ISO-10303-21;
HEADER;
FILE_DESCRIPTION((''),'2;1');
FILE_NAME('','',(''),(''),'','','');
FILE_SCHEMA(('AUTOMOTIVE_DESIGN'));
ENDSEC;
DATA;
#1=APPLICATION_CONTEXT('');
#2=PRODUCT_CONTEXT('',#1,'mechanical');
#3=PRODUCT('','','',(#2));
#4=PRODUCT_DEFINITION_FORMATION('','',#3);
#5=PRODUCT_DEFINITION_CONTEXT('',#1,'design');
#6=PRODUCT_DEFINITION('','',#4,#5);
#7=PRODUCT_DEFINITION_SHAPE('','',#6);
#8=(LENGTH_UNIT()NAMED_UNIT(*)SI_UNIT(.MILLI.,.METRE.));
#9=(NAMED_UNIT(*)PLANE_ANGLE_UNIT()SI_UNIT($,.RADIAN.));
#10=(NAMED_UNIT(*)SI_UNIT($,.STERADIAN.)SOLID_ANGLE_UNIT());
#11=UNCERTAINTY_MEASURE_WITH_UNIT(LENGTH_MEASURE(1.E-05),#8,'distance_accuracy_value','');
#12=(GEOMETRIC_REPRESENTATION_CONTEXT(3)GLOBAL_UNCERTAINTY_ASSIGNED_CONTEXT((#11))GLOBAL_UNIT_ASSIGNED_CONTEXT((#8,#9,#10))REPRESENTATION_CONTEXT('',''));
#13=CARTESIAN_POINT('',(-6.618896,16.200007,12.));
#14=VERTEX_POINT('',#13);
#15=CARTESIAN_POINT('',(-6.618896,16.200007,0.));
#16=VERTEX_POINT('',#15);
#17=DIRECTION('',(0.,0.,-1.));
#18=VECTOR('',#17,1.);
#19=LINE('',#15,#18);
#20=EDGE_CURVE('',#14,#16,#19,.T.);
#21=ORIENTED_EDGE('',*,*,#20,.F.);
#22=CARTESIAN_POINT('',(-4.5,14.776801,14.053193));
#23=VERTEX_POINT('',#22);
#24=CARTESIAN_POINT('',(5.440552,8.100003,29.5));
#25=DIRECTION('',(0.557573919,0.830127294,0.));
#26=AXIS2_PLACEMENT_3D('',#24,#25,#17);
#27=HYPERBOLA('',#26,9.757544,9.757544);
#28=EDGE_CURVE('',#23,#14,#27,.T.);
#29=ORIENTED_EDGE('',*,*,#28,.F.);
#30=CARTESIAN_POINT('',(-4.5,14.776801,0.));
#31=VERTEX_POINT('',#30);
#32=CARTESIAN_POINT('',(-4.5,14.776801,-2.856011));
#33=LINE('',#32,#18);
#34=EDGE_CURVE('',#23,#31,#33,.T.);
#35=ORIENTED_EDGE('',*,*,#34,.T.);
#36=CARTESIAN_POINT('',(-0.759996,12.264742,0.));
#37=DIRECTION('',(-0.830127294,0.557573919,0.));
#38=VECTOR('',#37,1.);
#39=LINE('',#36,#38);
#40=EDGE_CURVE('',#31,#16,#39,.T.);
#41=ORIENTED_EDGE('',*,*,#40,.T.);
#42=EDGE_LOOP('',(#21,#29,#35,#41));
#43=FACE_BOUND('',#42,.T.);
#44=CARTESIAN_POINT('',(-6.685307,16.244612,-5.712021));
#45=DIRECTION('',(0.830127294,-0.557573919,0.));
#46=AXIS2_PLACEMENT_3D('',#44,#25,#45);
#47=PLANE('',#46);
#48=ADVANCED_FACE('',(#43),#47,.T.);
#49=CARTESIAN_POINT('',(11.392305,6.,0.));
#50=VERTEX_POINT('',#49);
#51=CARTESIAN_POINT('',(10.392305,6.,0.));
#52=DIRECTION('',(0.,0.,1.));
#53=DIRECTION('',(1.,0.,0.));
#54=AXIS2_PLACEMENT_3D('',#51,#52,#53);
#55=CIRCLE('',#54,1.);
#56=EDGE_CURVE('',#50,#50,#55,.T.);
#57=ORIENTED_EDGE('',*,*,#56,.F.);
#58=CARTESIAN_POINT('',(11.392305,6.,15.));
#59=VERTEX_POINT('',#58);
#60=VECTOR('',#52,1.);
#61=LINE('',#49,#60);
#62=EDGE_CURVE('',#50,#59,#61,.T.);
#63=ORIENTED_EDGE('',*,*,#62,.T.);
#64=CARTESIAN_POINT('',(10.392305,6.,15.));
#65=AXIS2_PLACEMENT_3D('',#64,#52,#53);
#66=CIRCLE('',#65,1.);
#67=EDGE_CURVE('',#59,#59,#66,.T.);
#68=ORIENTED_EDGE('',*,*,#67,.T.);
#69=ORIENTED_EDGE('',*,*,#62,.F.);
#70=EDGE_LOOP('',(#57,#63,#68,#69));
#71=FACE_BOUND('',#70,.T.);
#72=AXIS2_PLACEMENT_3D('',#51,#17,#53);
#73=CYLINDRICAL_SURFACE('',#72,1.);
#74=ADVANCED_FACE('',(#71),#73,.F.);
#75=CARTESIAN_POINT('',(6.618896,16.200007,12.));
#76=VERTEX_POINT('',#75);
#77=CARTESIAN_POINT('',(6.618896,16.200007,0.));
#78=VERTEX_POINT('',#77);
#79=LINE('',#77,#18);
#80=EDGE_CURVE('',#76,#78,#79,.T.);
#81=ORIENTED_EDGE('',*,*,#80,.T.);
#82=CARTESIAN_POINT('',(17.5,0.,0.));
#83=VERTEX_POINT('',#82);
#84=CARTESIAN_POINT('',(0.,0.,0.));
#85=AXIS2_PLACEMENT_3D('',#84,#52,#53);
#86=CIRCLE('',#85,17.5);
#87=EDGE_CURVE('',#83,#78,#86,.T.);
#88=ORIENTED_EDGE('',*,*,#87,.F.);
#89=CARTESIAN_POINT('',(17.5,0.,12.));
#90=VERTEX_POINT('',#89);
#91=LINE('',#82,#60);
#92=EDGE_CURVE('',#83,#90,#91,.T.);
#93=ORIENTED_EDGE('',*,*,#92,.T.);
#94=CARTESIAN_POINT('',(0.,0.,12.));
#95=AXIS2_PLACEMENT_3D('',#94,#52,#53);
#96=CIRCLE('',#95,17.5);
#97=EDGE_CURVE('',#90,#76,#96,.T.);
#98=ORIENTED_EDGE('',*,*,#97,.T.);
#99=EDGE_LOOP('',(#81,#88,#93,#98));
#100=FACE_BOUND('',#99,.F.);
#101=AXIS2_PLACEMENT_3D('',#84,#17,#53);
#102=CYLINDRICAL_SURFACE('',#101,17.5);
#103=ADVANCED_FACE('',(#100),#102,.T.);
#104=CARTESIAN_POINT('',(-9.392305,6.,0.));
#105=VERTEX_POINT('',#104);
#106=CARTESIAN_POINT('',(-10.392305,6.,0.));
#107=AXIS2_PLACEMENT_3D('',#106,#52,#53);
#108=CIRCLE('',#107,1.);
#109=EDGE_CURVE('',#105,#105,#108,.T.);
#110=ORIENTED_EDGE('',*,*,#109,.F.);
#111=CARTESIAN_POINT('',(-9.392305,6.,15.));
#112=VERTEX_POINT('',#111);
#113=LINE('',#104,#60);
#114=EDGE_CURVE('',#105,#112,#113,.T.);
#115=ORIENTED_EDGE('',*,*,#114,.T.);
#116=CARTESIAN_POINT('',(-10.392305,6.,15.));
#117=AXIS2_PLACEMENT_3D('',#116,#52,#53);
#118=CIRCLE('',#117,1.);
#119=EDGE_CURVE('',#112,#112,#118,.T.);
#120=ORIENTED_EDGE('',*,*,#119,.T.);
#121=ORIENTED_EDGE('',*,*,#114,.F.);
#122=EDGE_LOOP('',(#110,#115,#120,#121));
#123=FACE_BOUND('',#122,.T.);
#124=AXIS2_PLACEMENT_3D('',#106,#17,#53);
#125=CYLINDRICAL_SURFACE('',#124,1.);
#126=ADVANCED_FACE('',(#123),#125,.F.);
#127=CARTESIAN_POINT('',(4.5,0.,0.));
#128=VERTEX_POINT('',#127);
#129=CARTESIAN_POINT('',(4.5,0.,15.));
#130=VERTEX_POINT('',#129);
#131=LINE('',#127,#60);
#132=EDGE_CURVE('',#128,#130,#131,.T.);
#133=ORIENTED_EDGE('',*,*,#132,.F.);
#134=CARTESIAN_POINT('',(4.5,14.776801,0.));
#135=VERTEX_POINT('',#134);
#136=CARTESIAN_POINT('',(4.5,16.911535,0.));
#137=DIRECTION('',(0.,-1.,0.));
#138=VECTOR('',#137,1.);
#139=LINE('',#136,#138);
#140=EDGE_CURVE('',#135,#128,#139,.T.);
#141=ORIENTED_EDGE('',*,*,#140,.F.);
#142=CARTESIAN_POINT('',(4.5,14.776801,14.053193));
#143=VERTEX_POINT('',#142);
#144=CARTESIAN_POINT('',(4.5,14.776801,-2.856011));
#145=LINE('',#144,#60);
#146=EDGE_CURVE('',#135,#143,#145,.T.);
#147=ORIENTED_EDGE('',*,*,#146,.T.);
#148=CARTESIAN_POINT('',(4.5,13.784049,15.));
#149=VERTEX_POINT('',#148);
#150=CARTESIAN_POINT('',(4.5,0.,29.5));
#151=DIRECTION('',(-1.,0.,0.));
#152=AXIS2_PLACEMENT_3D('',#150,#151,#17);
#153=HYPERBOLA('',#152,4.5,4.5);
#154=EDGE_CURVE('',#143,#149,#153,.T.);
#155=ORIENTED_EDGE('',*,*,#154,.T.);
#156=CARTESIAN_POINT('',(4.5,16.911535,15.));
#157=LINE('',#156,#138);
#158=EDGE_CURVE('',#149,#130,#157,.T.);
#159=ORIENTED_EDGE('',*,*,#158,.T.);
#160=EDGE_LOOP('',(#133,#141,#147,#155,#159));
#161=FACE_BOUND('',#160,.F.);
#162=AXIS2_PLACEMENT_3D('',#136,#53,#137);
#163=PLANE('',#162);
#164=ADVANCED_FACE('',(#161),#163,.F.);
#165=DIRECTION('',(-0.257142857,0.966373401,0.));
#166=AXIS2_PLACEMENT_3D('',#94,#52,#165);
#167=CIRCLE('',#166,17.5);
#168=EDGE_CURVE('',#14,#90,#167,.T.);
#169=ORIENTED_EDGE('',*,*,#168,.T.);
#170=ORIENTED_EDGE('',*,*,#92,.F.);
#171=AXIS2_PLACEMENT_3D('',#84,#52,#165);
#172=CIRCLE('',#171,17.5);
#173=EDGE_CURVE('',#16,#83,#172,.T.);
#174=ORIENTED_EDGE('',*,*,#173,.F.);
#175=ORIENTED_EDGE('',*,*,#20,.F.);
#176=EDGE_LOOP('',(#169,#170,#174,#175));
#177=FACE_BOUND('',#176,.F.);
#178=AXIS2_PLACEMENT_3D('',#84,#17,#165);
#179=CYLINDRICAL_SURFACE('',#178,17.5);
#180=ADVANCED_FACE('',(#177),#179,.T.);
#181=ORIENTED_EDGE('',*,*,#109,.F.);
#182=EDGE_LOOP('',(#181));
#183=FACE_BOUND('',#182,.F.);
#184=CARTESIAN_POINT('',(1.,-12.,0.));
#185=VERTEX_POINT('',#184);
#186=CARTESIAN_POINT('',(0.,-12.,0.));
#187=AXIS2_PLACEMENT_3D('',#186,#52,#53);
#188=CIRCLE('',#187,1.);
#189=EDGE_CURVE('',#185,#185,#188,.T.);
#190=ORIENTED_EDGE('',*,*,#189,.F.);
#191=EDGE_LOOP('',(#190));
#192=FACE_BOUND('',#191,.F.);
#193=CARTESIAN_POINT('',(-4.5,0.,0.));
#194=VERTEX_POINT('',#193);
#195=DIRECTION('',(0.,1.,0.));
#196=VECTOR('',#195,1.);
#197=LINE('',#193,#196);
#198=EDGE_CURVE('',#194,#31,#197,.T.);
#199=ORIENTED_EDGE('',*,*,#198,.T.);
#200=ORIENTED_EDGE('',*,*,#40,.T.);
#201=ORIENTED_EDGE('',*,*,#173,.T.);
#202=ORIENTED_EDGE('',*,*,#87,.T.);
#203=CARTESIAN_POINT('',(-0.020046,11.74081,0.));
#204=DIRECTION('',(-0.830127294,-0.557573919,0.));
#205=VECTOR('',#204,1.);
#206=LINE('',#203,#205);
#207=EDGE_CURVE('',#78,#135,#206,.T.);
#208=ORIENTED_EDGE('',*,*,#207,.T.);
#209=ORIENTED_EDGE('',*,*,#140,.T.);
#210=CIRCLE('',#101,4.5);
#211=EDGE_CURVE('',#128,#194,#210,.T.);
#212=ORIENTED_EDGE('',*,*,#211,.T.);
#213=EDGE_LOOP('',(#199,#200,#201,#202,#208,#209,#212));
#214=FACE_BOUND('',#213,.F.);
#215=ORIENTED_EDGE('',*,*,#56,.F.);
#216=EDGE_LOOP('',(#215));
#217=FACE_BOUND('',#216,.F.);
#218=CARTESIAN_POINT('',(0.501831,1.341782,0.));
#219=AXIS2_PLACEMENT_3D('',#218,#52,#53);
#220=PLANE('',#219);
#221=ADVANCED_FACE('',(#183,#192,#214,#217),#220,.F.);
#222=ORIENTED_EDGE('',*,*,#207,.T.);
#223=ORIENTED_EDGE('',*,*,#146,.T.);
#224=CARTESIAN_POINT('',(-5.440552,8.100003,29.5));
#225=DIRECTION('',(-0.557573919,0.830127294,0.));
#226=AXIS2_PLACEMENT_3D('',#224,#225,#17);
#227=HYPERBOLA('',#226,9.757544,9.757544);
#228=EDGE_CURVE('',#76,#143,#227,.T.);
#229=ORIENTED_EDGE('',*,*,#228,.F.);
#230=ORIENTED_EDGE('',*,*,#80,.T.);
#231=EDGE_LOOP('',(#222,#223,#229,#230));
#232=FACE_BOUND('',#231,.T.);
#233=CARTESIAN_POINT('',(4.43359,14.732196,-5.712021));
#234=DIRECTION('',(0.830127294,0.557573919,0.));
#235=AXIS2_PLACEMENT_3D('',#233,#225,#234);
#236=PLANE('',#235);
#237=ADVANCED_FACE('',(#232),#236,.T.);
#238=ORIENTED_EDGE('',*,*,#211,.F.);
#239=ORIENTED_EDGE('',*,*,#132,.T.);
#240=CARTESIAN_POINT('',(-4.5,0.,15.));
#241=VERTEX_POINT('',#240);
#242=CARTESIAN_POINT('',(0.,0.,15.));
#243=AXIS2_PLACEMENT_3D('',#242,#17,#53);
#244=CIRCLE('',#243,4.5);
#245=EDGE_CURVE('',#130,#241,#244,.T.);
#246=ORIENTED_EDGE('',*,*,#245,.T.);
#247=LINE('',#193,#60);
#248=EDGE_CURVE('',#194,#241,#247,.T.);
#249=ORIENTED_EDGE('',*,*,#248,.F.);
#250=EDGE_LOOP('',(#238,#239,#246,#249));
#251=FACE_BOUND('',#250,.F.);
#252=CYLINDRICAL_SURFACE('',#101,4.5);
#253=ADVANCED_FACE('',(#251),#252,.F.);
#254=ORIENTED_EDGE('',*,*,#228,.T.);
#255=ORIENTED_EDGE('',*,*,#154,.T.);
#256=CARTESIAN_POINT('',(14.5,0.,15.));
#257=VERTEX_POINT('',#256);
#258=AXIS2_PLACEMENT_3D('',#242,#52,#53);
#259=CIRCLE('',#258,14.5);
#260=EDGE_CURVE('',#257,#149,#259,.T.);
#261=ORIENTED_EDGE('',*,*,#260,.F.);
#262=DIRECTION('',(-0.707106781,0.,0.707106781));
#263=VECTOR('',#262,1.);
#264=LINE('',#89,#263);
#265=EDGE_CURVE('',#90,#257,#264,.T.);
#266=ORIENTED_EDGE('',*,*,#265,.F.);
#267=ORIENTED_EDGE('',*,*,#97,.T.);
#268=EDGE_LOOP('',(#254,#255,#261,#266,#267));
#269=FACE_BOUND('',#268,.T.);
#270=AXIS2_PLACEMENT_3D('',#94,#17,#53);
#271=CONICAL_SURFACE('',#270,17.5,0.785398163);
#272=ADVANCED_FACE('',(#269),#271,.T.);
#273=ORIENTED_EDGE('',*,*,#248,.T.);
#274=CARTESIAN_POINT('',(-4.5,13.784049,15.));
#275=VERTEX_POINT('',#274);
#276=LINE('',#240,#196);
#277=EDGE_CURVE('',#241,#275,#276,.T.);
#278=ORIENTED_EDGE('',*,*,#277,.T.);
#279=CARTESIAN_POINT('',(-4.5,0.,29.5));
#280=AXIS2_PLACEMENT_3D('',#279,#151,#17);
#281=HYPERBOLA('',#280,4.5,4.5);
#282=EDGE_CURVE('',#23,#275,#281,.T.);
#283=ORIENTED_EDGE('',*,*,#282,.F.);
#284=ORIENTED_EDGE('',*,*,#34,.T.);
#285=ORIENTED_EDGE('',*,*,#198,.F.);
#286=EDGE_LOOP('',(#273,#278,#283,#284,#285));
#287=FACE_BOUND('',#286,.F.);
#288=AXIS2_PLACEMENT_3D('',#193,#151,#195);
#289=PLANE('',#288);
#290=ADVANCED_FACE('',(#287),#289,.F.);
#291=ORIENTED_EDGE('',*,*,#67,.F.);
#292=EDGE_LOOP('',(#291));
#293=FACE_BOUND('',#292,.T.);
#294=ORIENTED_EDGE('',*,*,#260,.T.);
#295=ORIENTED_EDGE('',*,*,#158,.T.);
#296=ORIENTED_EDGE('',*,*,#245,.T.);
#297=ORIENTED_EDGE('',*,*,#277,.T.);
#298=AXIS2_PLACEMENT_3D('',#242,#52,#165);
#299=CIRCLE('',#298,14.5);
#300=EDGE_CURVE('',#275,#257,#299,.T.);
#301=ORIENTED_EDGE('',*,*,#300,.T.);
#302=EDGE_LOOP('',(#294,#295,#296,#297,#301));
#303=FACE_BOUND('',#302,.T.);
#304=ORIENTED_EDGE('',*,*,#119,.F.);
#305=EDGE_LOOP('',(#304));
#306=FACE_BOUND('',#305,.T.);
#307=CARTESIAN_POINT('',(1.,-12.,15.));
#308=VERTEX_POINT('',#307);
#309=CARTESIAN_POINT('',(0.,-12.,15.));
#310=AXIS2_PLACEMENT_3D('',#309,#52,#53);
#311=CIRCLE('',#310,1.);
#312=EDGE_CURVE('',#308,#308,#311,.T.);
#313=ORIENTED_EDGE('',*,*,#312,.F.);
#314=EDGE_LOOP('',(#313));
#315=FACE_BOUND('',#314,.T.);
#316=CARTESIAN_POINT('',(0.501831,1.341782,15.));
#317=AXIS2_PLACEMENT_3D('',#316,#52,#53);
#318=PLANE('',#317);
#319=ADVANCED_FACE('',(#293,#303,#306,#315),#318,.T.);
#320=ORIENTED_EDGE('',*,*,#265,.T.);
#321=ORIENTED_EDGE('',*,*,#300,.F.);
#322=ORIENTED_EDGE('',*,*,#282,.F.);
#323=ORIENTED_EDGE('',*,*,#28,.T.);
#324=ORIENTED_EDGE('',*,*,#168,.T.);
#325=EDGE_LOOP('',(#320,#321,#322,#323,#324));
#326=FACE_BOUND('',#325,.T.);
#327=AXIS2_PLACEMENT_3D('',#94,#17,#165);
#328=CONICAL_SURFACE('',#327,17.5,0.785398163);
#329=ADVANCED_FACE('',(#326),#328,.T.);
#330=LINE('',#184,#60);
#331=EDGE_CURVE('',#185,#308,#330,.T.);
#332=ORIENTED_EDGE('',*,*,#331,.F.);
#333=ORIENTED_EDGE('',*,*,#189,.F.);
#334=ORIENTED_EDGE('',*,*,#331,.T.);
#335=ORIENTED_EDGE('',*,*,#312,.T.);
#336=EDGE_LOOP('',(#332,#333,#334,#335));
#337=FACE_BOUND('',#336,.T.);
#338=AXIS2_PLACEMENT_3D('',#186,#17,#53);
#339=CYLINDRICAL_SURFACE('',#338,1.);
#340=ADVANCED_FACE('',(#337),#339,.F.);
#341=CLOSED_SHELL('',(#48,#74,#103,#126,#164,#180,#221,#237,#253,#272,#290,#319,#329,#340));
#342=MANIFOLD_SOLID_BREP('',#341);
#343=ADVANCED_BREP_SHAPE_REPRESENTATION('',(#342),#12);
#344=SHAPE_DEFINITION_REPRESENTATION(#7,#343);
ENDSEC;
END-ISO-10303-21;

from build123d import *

# Parameters (mm, degrees)
F0_R        = 1
F1_DEPTH    = 15
F2_SIZE     = 3
F3_T1_DEPTH = 23.4240423609


# Not quite as in the source:
# - a fillet or chamfer that OpenCascade refuses, or shapes differently, is made with other operations: its cross-section is extruded or revolved along the edge and cut away or added


with BuildPart() as f1:
    # F0 (on Top) → F1 (new body)
    with BuildSketch(Plane.XY):
        with BuildLine():
            ThreePointArc((-4.5, 16.9115345253), (-10.6653645039, -13.8744369255), (17.5, 0))
            ThreePointArc((17.5, 0), (13.8744369255, 10.6653645039), (4.5, 16.9115345253))
            Line((4.5, 16.9115345253), (4.5, 0))
            ThreePointArc((4.5, 0), (0, -4.5), (-4.5, 0))
            Line((-4.5, 0), (-4.5, 16.9115345253))
        make_face()
        with Locations((0, -12)):
            Circle(F0_R, mode=Mode.SUBTRACT)
        with Locations((-10.3923048454, 6)):
            Circle(F0_R, mode=Mode.SUBTRACT)
        with Locations((10.3923048454, 6)):
            Circle(F0_R, mode=Mode.SUBTRACT)
    extrude(amount=F1_DEPTH)

    # F2
    f2_edges = [f1.edges().sort_by_distance(p)[0] for p in [
        (-10.665365, -13.874437, 15),
        (13.874437, 10.665365, 15),
    ]]
    chamfer(f2_edges, length=F2_SIZE)

    # F3: chamfer of 2 on 2 edges, made by hand

    # F3_s2 → F3_t1 (cut)
    with BuildSketch(Plane.XY.offset(-5.7120211805)):
        with BuildLine():
            Line((-6.685306539, 16.244612427), (-4.4335898165, 14.7321955637))
            Line((-4.4335898165, 14.7321955637), (-4.3935898165, 14.7321955637))
            ThreePointArc((-4.3935898165, 14.7321955637), (-4.46, 15.8218650445), (-4.46, 16.9115345253))
            Line((-4.46, 16.9115345253), (-4.5102857143, 16.9501894613))
            ThreePointArc((-4.5102857143, 16.9501894613), (-5.6067154961, 16.6197575598), (-6.700435445, 16.2816410133))
            Line((-6.700435445, 16.2816410133), (-6.685306539, 16.244612427))
        make_face()
        with BuildLine():
            Line((4.4335898165, 14.7321955637), (6.685306539, 16.244612427))
            Line((6.685306539, 16.244612427), (6.700435445, 16.2816410133))
            ThreePointArc((6.700435445, 16.2816410133), (5.6067154961, 16.6197575598), (4.5102857143, 16.9501894613))
            Line((4.5102857143, 16.9501894613), (4.46, 16.9115345253))
            ThreePointArc((4.46, 16.9115345253), (4.46, 15.8218650445), (4.3935898165, 14.7321955637))
            Line((4.3935898165, 14.7321955637), (4.4335898165, 14.7321955637))
        make_face()
    extrude(amount=F3_T1_DEPTH, mode=Mode.SUBTRACT)


solid = f1.part
